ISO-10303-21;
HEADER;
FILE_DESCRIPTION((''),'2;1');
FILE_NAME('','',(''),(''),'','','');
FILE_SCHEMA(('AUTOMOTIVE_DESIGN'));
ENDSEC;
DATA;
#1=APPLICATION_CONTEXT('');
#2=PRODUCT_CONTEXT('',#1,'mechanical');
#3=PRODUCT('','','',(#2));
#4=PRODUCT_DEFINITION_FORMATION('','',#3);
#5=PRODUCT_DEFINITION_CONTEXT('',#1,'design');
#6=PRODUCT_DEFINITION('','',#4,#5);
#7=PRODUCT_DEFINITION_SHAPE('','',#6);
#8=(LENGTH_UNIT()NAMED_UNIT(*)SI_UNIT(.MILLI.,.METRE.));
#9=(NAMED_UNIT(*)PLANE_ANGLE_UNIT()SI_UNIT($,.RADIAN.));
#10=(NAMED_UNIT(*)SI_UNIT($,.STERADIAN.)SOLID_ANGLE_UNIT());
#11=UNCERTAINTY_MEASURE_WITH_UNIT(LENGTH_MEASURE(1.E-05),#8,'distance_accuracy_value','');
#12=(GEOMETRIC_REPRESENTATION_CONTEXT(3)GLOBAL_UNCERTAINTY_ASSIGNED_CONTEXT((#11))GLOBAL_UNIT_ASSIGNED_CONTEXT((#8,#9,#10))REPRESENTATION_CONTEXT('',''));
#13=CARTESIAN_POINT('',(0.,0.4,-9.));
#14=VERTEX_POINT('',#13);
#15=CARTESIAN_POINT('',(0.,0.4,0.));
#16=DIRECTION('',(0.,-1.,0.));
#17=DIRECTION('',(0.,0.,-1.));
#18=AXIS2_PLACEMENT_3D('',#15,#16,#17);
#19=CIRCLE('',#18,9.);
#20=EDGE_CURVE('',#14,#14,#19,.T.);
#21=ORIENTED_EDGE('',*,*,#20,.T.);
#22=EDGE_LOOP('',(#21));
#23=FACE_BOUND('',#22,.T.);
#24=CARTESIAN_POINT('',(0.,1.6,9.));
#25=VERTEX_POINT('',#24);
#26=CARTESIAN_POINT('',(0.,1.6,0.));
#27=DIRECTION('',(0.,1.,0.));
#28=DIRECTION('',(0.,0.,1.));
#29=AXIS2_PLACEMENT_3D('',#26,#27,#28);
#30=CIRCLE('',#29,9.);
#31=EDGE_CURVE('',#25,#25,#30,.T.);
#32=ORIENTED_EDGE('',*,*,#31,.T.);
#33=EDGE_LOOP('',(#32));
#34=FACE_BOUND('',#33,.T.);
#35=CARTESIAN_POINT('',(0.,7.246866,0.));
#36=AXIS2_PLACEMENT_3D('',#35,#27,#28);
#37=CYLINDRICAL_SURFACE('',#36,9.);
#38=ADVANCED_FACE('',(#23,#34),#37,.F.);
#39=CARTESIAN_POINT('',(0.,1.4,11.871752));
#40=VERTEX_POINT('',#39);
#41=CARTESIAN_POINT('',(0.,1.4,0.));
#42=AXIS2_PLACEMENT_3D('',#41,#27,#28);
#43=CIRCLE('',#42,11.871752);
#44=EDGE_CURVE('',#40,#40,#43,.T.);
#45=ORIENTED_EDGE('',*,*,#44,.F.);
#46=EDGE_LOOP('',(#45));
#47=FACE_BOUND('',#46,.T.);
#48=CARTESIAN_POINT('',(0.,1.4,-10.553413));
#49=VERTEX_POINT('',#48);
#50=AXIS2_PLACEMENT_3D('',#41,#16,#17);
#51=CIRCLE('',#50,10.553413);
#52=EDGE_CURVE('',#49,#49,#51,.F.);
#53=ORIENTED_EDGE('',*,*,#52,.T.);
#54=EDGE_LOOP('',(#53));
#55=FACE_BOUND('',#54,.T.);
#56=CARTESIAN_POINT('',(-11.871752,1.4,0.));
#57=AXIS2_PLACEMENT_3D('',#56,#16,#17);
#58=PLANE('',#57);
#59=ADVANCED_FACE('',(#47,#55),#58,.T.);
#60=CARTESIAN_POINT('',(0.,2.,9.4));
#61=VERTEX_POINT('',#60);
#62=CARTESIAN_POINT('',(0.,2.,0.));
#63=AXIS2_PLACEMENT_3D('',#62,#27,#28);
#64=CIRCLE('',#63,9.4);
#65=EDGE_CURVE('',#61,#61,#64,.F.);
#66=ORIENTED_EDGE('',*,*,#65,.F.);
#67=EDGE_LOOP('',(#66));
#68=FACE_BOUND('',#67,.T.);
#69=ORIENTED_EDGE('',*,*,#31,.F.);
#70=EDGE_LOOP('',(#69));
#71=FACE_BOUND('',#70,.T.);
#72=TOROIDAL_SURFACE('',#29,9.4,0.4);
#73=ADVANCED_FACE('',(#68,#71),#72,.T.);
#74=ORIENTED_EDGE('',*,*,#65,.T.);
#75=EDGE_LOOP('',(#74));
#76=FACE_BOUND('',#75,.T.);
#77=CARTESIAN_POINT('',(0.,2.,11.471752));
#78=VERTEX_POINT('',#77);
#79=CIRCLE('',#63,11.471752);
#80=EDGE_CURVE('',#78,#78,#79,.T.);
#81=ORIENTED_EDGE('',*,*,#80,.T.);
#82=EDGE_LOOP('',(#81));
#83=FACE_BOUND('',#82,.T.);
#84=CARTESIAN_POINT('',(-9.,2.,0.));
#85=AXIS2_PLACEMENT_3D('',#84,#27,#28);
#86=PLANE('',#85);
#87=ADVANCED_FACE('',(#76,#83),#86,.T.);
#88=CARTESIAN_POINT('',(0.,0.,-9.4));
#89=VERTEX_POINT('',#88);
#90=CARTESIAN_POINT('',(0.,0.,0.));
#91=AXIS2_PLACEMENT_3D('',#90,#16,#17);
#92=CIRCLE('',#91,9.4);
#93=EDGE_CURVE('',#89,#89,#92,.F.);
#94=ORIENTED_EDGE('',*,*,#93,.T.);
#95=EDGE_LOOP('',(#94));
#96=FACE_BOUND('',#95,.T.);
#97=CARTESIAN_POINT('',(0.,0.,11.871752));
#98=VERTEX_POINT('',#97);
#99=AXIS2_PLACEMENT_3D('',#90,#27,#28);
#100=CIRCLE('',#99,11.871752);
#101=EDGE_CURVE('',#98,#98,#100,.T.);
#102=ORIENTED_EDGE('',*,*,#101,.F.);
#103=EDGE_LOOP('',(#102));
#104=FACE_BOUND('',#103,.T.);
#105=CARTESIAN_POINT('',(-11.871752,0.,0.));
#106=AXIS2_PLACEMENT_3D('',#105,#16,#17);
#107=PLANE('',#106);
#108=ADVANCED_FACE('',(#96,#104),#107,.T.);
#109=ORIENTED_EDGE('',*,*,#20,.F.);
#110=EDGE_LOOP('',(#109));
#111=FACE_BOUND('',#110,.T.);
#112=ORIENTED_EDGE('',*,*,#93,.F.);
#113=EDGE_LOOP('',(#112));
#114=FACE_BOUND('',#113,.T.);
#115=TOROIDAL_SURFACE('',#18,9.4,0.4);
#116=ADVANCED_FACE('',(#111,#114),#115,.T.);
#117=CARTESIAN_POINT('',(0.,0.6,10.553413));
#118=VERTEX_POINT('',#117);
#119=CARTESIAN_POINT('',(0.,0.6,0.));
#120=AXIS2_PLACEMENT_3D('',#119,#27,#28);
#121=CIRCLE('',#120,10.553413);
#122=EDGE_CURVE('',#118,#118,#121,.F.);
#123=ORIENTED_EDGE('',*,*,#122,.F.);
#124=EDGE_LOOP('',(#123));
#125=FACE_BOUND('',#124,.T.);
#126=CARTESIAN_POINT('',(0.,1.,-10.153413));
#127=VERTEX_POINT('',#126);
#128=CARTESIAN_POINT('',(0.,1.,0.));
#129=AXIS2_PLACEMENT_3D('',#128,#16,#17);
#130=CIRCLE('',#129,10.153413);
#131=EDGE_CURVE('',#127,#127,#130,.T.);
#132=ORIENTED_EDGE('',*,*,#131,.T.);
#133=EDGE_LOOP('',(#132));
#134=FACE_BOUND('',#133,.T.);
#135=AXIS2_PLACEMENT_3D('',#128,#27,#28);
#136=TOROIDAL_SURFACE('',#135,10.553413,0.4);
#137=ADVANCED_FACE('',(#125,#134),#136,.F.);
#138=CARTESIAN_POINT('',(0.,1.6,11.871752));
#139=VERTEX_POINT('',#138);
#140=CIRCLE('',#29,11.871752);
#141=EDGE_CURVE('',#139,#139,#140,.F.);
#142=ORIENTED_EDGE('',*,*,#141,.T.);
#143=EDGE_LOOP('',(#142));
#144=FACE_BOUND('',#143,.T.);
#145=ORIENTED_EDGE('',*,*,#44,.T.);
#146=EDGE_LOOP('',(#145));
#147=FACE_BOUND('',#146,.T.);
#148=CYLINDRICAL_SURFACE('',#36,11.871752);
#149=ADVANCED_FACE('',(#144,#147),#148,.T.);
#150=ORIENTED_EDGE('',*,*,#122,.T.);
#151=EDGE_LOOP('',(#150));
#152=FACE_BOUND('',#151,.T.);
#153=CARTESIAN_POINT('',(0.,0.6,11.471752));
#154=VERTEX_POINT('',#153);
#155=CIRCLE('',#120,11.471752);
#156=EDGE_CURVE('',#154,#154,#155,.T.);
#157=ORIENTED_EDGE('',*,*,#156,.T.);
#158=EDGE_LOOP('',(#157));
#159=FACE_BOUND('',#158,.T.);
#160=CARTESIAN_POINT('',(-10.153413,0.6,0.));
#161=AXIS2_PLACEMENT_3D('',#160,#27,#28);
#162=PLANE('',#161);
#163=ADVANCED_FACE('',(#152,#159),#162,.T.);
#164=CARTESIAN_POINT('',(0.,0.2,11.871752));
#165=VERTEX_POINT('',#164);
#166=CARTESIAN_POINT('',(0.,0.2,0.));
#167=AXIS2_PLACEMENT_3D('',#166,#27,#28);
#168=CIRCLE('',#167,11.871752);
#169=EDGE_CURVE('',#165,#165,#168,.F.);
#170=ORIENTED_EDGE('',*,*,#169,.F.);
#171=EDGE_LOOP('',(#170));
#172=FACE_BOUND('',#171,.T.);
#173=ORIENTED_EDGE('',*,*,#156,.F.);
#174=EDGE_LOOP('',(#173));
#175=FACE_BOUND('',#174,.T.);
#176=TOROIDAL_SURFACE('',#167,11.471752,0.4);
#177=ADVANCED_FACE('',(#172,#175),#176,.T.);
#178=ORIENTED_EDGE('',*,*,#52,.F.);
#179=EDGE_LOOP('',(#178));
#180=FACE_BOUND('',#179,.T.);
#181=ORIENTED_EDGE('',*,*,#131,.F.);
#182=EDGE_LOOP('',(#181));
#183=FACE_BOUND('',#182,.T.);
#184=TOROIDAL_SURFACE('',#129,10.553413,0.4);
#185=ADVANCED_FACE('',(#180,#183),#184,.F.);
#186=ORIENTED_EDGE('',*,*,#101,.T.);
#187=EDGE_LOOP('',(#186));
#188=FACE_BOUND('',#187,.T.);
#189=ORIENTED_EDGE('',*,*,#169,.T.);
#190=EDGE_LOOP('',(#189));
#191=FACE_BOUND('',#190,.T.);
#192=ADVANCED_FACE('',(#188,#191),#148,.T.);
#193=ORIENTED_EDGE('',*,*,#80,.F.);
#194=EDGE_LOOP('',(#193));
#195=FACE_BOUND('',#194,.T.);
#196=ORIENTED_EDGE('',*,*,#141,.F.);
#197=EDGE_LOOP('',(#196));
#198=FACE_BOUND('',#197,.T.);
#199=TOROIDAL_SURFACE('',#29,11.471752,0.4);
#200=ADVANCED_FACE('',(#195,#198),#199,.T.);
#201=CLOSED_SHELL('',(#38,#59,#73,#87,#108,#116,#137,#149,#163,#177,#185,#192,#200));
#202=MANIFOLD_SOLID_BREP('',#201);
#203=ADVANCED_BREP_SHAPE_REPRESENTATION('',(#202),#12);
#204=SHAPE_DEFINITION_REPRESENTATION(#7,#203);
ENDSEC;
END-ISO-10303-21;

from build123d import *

# Parameters (mm, degrees)
FILLET1_R = 0.4


with BuildPart() as part:
    # Sketch1 → Revolve1 (revolve)
    with BuildSketch(Plane.XY, mode=Mode.PRIVATE) as revolve1_sk:
        Polygon((-9, 0), (-9, 2), (-11.87175241, 2), (-11.87175241, 1.4), (-10.153413472, 1.4), (-10.153413472, 0.6), (-11.87175241, 0.6), (-11.87175241, 0), align=None)
    revolve(revolve1_sk.sketch.rotate(Axis((0, 7.246866229, 0), (0, -1, 0)), 270), axis=Axis((0, 7.246866229, 0), (0, -1, 0)))

    # Fillet1
    fillet1_edges = [part.edges().sort_by_distance(p)[0] for p in [
        (0, 0.6, -11.87175241),
        (0, 0.6, -10.153413472),
        (0, 1.4, -10.153413472),
        (0, 2, -11.87175241),
        (0, 2, -9),
        (0, 0, -9),
    ]]
    fillet(fillet1_edges, radius=FILLET1_R - 0.0001)  # a hair under: the kernel refuses the full size


solid = part.part
